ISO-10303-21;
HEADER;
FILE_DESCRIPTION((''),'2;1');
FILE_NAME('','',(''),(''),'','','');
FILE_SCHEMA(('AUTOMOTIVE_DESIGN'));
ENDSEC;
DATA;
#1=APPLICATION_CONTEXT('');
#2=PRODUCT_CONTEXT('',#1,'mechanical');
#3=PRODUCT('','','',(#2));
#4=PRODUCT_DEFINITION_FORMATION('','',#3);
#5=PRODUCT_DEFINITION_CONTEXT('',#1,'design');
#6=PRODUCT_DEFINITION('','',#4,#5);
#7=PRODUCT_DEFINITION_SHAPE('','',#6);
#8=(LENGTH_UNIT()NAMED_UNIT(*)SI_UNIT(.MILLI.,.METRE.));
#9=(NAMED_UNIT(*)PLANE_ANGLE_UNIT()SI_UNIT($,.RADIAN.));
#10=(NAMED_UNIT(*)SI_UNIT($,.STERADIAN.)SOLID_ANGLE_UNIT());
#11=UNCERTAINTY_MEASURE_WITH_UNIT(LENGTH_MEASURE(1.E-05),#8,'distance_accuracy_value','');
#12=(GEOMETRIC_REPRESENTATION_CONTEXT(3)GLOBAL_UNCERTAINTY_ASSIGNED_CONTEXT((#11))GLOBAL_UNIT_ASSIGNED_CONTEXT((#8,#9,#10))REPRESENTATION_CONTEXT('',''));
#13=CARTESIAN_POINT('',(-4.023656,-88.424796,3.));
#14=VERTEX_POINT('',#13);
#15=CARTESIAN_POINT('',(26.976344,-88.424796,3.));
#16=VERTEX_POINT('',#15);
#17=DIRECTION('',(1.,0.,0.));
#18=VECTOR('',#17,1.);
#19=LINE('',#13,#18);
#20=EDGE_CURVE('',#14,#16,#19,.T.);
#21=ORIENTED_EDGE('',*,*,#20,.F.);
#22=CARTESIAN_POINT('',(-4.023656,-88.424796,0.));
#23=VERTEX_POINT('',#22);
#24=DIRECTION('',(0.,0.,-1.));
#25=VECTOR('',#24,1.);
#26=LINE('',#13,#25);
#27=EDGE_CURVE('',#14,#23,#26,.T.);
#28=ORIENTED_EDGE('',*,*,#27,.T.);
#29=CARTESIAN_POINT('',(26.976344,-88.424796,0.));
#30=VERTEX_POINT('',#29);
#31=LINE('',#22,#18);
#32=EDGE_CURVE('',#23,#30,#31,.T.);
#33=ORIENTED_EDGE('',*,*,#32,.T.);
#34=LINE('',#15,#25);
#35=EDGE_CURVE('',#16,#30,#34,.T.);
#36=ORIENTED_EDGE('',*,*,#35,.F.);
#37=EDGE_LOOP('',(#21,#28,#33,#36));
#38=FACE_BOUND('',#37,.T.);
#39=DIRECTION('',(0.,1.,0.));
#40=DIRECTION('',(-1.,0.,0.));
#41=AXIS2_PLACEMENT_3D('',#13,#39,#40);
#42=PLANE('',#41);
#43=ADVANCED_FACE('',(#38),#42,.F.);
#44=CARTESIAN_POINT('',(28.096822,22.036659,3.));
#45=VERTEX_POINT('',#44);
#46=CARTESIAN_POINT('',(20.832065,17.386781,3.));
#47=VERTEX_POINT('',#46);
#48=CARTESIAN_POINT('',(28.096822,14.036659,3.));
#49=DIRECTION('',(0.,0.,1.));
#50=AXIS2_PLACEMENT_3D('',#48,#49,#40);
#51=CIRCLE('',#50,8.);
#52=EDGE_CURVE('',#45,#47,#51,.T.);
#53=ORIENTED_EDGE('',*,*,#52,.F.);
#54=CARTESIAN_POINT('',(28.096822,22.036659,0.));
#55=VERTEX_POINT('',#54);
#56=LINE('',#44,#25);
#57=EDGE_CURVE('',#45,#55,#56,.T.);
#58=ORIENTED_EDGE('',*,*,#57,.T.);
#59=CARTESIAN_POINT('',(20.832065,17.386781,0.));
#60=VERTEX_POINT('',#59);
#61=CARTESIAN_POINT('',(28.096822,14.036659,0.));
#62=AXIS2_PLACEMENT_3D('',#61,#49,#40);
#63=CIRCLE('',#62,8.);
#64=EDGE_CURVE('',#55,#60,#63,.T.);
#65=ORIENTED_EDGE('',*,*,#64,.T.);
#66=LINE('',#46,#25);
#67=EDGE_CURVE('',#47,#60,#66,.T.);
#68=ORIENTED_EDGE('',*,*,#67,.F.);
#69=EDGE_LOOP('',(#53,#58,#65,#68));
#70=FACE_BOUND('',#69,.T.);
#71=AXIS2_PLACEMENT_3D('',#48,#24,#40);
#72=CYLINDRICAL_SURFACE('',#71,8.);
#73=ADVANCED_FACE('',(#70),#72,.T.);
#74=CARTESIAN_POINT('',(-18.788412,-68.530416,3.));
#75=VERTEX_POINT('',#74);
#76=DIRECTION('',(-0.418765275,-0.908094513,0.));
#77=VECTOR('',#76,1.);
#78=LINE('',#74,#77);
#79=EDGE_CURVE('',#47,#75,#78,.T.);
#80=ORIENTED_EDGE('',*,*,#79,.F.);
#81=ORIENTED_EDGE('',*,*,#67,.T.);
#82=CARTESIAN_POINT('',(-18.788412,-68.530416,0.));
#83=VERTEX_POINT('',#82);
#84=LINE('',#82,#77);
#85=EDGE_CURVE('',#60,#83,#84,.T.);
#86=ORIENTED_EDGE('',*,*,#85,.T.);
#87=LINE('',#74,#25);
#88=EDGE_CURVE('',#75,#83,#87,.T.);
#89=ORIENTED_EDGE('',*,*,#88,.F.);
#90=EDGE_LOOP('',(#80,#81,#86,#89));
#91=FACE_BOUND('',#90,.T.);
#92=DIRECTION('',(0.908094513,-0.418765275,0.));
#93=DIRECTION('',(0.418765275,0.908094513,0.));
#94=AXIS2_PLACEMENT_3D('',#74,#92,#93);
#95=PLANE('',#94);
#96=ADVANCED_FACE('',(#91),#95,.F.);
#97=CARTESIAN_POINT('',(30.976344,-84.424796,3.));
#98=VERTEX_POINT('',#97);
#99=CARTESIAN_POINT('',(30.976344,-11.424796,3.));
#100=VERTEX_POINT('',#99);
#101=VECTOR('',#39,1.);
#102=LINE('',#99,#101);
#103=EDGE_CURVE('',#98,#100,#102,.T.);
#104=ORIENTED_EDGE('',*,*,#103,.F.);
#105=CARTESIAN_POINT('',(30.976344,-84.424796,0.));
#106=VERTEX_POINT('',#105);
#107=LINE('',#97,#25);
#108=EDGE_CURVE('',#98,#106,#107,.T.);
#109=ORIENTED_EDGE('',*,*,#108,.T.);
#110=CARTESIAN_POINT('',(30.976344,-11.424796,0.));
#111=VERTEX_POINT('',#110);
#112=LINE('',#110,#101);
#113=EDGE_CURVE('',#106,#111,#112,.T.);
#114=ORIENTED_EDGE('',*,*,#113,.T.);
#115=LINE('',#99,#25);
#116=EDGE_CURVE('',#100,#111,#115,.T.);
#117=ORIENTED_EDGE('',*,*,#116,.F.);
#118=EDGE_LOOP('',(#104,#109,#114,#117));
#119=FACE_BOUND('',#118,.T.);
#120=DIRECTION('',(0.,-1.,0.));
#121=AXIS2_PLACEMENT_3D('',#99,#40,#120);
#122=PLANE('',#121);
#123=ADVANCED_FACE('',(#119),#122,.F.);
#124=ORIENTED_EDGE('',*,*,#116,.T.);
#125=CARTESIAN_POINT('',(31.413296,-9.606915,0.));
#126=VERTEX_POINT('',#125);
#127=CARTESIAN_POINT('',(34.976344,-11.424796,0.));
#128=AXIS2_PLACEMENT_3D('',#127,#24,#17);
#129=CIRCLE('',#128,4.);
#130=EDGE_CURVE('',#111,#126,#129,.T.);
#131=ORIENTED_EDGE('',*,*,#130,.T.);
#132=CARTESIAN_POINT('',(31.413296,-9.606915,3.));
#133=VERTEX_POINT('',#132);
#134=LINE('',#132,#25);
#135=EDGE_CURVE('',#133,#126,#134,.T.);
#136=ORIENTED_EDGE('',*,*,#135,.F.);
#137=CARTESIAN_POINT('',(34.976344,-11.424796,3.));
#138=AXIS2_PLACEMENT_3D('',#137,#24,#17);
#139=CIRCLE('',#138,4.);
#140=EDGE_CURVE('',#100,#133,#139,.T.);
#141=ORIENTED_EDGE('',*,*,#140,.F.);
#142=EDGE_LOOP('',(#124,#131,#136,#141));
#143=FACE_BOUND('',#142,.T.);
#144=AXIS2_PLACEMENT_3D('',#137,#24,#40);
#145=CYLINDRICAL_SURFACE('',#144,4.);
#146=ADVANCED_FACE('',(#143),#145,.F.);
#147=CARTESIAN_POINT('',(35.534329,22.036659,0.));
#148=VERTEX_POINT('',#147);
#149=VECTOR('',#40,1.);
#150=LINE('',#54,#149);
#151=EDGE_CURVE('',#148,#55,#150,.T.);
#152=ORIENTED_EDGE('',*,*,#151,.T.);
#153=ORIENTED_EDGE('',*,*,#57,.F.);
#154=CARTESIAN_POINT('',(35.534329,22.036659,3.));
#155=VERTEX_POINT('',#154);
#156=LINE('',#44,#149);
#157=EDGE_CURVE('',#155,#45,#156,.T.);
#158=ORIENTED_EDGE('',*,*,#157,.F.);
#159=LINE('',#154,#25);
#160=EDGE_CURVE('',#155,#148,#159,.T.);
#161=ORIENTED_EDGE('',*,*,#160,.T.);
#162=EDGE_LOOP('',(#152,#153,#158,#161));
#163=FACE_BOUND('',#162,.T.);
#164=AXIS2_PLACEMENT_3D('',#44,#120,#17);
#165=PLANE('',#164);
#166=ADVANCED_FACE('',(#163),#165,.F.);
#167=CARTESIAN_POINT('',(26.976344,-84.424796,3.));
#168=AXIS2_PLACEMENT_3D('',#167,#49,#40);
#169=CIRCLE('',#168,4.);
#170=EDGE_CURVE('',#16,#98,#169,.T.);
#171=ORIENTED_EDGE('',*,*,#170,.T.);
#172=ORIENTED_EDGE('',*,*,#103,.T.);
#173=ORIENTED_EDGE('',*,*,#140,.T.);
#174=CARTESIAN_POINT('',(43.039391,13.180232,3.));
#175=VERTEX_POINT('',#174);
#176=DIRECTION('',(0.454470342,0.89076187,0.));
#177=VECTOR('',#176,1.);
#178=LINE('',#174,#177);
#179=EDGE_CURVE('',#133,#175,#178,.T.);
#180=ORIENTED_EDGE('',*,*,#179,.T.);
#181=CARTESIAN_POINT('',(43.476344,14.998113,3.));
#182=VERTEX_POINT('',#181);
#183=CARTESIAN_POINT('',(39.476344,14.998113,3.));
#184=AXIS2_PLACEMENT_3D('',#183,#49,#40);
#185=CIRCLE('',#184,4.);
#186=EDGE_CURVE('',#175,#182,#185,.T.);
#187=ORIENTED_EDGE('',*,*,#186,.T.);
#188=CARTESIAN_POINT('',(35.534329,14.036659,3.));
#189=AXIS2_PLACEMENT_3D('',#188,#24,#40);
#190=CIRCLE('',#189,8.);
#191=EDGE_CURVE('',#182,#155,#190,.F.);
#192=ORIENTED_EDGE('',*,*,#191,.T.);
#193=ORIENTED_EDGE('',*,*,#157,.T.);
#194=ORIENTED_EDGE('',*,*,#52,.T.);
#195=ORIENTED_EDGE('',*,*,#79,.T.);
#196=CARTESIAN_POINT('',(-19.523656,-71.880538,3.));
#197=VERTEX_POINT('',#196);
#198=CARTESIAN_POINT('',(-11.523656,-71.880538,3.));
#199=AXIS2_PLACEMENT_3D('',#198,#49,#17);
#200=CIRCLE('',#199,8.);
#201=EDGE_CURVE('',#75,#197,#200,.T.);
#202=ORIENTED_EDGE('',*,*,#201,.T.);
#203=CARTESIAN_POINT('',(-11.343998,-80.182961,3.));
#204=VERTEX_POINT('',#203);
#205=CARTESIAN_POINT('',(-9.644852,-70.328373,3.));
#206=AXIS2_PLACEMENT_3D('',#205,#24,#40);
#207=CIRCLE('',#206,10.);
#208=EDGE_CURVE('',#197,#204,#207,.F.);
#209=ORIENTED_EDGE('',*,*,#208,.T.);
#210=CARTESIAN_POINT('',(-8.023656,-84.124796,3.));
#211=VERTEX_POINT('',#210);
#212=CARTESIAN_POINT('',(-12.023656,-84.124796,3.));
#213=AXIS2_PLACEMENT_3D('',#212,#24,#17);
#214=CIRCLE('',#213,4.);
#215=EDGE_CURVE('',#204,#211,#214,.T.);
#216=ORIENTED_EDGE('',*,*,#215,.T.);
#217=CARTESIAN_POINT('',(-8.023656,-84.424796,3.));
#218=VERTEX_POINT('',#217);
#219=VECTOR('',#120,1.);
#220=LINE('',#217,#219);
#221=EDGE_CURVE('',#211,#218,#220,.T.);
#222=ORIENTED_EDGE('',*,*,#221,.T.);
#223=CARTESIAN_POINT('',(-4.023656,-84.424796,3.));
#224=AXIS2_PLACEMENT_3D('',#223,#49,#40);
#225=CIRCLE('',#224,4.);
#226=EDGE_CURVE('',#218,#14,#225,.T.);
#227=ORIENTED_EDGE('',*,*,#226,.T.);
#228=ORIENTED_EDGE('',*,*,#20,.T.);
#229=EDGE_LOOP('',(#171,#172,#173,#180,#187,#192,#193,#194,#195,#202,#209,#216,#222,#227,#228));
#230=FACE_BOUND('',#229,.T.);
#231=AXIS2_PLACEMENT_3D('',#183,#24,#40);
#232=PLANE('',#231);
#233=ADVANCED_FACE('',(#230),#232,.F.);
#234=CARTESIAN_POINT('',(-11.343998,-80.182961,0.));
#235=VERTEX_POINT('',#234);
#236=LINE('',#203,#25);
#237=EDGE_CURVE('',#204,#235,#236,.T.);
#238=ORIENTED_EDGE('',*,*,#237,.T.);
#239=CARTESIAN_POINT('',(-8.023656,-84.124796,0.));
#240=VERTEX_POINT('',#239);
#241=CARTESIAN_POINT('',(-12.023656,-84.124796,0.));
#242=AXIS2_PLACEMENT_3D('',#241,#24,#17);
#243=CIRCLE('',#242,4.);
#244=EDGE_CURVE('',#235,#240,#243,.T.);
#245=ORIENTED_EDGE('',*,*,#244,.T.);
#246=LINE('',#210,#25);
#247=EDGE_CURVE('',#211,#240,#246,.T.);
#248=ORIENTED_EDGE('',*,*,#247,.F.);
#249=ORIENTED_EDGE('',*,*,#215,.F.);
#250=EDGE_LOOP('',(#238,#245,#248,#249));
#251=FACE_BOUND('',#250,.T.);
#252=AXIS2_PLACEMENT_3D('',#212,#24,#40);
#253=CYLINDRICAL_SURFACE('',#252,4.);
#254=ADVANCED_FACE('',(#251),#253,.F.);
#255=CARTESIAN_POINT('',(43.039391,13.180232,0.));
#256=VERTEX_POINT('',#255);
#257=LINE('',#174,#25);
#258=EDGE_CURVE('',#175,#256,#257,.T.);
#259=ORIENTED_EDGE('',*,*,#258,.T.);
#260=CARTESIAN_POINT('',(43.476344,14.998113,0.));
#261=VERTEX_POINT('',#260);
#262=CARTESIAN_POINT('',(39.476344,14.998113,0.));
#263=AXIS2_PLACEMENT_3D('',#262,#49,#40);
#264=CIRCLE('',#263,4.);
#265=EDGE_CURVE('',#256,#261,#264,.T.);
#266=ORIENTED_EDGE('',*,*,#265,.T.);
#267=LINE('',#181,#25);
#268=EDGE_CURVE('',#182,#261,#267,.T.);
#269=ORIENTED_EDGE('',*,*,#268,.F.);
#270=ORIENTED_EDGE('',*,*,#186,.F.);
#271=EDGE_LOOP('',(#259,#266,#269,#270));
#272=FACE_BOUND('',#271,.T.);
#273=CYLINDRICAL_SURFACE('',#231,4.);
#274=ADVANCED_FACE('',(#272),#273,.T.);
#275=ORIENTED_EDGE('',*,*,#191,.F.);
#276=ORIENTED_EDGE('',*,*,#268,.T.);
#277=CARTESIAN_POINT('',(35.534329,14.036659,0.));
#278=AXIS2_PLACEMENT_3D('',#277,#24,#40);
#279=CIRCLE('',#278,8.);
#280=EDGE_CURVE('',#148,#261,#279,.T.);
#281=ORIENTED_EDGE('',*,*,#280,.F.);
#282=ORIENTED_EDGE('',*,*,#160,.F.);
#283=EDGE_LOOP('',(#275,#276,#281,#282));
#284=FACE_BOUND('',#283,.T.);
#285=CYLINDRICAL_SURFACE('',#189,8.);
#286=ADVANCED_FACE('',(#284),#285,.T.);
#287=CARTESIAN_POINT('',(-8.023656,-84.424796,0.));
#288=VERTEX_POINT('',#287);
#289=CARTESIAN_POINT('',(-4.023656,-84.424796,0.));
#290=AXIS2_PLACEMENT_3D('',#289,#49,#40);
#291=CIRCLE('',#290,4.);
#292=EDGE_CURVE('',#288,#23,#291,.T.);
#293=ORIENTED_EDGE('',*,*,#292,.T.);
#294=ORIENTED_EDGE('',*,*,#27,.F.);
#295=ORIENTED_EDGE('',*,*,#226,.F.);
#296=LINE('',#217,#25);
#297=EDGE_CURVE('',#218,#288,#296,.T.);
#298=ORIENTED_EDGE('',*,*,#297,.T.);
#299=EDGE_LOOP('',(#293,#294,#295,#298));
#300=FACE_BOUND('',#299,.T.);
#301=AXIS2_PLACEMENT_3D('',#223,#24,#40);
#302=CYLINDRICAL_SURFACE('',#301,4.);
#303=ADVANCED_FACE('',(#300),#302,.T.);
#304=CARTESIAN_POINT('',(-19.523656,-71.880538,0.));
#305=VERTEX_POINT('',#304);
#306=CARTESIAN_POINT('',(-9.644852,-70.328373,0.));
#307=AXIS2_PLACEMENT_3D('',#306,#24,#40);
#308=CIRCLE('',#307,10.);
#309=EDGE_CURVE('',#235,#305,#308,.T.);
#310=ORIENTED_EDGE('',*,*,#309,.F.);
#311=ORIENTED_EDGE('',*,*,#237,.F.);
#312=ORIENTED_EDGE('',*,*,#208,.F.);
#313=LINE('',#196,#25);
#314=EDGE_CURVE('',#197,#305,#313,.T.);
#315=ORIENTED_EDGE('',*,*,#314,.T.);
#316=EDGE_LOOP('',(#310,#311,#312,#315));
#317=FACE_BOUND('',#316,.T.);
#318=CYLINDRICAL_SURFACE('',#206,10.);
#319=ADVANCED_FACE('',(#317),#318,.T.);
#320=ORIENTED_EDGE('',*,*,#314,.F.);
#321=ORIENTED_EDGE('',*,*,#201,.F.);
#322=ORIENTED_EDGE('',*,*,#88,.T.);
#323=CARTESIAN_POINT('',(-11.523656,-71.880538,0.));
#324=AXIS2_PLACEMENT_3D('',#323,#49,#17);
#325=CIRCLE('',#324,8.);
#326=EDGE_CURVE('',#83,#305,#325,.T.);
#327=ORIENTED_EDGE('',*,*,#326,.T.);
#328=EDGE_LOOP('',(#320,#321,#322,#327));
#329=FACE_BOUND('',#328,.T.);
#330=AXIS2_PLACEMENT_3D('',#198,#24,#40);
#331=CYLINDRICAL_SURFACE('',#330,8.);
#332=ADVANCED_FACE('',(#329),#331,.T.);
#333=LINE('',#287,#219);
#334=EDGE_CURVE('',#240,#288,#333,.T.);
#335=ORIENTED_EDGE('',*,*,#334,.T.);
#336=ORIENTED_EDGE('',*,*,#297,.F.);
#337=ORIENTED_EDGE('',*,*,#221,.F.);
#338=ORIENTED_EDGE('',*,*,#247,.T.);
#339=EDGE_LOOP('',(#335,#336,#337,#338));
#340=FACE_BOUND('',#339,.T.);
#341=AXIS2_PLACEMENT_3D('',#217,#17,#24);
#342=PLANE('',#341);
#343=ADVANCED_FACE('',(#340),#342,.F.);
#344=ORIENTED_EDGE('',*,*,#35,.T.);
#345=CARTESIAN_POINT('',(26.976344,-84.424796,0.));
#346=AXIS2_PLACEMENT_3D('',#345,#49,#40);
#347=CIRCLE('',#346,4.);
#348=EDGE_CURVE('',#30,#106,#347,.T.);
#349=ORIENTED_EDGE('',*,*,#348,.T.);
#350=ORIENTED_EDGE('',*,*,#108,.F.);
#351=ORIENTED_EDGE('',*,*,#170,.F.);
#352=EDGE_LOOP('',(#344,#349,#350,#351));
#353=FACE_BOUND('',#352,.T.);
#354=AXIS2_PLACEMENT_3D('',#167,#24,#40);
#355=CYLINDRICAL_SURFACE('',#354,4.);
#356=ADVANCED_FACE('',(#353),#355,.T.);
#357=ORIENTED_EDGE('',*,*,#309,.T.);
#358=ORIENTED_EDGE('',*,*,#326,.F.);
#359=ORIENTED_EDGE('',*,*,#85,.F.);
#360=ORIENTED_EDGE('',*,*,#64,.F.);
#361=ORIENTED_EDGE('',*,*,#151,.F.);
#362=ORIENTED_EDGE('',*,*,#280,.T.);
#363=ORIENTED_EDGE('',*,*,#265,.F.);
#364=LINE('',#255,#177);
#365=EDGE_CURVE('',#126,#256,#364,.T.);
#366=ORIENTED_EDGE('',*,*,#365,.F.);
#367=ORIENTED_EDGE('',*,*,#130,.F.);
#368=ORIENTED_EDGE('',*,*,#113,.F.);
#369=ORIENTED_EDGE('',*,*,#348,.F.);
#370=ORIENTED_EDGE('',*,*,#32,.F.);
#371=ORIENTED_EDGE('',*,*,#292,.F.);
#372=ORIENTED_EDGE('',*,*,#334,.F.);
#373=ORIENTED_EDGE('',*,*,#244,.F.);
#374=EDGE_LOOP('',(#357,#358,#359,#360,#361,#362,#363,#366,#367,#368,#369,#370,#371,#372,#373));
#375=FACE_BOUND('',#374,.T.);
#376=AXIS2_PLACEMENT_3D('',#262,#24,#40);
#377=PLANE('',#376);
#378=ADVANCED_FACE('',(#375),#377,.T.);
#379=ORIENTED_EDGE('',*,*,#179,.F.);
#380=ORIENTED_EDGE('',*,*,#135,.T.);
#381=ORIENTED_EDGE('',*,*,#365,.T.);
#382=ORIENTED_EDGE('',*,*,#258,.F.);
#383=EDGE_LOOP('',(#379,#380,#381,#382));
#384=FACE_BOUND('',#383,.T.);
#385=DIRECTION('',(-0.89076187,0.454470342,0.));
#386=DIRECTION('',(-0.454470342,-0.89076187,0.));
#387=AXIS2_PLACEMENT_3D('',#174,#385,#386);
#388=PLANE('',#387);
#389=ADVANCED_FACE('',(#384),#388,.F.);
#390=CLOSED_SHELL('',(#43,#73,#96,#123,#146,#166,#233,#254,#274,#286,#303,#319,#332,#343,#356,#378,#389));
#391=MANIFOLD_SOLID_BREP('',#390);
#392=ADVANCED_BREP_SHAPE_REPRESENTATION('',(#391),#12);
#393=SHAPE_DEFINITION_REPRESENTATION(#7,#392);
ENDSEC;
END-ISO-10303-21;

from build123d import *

# Parameters (mm, degrees)
BOSS_EXTRUDE1_DEPTH = 3
FILLET1_START       = -1
FILLET1_DEPTH       = 5
FILLET3_R           = 8


with BuildPart() as part:
    # Sketch1 → Boss-Extrude1 (new body)
    with BuildSketch(Plane.XY):
        with BuildLine():
            Line((43.039391211, 13.180231598), (31.413296253, -9.606914519))
            ThreePointArc((31.413296253, -9.606914519), (31.087115665, -10.489967002), (30.976343732, -11.424795886))
            Line((30.976343732, -11.424795886), (30.976343732, -84.424795886))
            ThreePointArc((30.976343732, -84.424795886), (29.804770857, -87.253223011), (26.976343732, -88.424795886))
            Line((26.976343732, -88.424795886), (-4.023656268, -88.424795886))
            ThreePointArc((-4.023656268, -88.424795886), (-6.852083393, -87.253223011), (-8.023656268, -84.424795886))
            Line((-8.023656268, -84.424795886), (-8.023656268, -84.124795886))
            ThreePointArc((-8.023656268, -84.124795886), (-9.195229143, -81.296368761), (-12.023656268, -80.124795886))
            Line((-12.023656268, -80.124795886), (-19.523656268, -80.124795886))
            Line((-19.523656268, -80.124795886), (-19.523656268, -71.88053816))
            ThreePointArc((-19.523656268, -71.88053816), (-19.337683681, -70.165610877), (-18.788412372, -68.530415961))
            Line((-18.788412372, -68.530415961), (20.832065435, 17.386780739))
            ThreePointArc((20.832065435, 17.386780739), (23.784106477, 20.774647022), (28.096821539, 22.036658539))
            Line((28.096821539, 22.036658539), (43.476343732, 22.036658539))
            Line((43.476343732, 22.036658539), (43.476343732, 14.998112965))
            ThreePointArc((43.476343732, 14.998112965), (43.365571799, 14.063284081), (43.039391211, 13.180231598))
        make_face()
    extrude(amount=BOSS_EXTRUDE1_DEPTH)

    # Fillet1: read off the stored shape, not the designer's step
    # Fillet1 outline → Fillet1 (cut)
    with BuildSketch(Plane.XY.offset(FILLET1_START)):
        with BuildLine():
            ThreePointArc((-12.023656268, -80.124795886), (-11.682584861, -80.139363626), (-11.343997774, -80.182960738))
            ThreePointArc((-11.343997774, -80.182960738), (-16.768389445, -77.346578315), (-19.523656268, -71.88053816))
            Line((-19.523656268, -71.88053816), (-19.523656268, -80.124795886))
            Line((-19.523656268, -80.124795886), (-12.023656268, -80.124795886))
        make_face()
    extrude(amount=FILLET1_DEPTH, mode=Mode.SUBTRACT)

    # Fillet3
    # the kernel refuses this fillet: 8 mm, written as the material it takes off along each edge
    with BuildSketch(Plane(origin=(43.476343732, 22.036658539, -19.855037992), x_dir=(-1, 0, 0), z_dir=(0, 0, 1))) as fillet3_piece_1:
        with BuildLine():
            CenterArc((7.942015197, 8), FILLET3_R, 186.902595068, 83.097404932)
            Line((0, 7.038545575), (0, 0))
            Line((0, 0), (7.942015197, 0))
        make_face()
    extrude(amount=42.710075985, mode=Mode.SUBTRACT)


solid = part.part
